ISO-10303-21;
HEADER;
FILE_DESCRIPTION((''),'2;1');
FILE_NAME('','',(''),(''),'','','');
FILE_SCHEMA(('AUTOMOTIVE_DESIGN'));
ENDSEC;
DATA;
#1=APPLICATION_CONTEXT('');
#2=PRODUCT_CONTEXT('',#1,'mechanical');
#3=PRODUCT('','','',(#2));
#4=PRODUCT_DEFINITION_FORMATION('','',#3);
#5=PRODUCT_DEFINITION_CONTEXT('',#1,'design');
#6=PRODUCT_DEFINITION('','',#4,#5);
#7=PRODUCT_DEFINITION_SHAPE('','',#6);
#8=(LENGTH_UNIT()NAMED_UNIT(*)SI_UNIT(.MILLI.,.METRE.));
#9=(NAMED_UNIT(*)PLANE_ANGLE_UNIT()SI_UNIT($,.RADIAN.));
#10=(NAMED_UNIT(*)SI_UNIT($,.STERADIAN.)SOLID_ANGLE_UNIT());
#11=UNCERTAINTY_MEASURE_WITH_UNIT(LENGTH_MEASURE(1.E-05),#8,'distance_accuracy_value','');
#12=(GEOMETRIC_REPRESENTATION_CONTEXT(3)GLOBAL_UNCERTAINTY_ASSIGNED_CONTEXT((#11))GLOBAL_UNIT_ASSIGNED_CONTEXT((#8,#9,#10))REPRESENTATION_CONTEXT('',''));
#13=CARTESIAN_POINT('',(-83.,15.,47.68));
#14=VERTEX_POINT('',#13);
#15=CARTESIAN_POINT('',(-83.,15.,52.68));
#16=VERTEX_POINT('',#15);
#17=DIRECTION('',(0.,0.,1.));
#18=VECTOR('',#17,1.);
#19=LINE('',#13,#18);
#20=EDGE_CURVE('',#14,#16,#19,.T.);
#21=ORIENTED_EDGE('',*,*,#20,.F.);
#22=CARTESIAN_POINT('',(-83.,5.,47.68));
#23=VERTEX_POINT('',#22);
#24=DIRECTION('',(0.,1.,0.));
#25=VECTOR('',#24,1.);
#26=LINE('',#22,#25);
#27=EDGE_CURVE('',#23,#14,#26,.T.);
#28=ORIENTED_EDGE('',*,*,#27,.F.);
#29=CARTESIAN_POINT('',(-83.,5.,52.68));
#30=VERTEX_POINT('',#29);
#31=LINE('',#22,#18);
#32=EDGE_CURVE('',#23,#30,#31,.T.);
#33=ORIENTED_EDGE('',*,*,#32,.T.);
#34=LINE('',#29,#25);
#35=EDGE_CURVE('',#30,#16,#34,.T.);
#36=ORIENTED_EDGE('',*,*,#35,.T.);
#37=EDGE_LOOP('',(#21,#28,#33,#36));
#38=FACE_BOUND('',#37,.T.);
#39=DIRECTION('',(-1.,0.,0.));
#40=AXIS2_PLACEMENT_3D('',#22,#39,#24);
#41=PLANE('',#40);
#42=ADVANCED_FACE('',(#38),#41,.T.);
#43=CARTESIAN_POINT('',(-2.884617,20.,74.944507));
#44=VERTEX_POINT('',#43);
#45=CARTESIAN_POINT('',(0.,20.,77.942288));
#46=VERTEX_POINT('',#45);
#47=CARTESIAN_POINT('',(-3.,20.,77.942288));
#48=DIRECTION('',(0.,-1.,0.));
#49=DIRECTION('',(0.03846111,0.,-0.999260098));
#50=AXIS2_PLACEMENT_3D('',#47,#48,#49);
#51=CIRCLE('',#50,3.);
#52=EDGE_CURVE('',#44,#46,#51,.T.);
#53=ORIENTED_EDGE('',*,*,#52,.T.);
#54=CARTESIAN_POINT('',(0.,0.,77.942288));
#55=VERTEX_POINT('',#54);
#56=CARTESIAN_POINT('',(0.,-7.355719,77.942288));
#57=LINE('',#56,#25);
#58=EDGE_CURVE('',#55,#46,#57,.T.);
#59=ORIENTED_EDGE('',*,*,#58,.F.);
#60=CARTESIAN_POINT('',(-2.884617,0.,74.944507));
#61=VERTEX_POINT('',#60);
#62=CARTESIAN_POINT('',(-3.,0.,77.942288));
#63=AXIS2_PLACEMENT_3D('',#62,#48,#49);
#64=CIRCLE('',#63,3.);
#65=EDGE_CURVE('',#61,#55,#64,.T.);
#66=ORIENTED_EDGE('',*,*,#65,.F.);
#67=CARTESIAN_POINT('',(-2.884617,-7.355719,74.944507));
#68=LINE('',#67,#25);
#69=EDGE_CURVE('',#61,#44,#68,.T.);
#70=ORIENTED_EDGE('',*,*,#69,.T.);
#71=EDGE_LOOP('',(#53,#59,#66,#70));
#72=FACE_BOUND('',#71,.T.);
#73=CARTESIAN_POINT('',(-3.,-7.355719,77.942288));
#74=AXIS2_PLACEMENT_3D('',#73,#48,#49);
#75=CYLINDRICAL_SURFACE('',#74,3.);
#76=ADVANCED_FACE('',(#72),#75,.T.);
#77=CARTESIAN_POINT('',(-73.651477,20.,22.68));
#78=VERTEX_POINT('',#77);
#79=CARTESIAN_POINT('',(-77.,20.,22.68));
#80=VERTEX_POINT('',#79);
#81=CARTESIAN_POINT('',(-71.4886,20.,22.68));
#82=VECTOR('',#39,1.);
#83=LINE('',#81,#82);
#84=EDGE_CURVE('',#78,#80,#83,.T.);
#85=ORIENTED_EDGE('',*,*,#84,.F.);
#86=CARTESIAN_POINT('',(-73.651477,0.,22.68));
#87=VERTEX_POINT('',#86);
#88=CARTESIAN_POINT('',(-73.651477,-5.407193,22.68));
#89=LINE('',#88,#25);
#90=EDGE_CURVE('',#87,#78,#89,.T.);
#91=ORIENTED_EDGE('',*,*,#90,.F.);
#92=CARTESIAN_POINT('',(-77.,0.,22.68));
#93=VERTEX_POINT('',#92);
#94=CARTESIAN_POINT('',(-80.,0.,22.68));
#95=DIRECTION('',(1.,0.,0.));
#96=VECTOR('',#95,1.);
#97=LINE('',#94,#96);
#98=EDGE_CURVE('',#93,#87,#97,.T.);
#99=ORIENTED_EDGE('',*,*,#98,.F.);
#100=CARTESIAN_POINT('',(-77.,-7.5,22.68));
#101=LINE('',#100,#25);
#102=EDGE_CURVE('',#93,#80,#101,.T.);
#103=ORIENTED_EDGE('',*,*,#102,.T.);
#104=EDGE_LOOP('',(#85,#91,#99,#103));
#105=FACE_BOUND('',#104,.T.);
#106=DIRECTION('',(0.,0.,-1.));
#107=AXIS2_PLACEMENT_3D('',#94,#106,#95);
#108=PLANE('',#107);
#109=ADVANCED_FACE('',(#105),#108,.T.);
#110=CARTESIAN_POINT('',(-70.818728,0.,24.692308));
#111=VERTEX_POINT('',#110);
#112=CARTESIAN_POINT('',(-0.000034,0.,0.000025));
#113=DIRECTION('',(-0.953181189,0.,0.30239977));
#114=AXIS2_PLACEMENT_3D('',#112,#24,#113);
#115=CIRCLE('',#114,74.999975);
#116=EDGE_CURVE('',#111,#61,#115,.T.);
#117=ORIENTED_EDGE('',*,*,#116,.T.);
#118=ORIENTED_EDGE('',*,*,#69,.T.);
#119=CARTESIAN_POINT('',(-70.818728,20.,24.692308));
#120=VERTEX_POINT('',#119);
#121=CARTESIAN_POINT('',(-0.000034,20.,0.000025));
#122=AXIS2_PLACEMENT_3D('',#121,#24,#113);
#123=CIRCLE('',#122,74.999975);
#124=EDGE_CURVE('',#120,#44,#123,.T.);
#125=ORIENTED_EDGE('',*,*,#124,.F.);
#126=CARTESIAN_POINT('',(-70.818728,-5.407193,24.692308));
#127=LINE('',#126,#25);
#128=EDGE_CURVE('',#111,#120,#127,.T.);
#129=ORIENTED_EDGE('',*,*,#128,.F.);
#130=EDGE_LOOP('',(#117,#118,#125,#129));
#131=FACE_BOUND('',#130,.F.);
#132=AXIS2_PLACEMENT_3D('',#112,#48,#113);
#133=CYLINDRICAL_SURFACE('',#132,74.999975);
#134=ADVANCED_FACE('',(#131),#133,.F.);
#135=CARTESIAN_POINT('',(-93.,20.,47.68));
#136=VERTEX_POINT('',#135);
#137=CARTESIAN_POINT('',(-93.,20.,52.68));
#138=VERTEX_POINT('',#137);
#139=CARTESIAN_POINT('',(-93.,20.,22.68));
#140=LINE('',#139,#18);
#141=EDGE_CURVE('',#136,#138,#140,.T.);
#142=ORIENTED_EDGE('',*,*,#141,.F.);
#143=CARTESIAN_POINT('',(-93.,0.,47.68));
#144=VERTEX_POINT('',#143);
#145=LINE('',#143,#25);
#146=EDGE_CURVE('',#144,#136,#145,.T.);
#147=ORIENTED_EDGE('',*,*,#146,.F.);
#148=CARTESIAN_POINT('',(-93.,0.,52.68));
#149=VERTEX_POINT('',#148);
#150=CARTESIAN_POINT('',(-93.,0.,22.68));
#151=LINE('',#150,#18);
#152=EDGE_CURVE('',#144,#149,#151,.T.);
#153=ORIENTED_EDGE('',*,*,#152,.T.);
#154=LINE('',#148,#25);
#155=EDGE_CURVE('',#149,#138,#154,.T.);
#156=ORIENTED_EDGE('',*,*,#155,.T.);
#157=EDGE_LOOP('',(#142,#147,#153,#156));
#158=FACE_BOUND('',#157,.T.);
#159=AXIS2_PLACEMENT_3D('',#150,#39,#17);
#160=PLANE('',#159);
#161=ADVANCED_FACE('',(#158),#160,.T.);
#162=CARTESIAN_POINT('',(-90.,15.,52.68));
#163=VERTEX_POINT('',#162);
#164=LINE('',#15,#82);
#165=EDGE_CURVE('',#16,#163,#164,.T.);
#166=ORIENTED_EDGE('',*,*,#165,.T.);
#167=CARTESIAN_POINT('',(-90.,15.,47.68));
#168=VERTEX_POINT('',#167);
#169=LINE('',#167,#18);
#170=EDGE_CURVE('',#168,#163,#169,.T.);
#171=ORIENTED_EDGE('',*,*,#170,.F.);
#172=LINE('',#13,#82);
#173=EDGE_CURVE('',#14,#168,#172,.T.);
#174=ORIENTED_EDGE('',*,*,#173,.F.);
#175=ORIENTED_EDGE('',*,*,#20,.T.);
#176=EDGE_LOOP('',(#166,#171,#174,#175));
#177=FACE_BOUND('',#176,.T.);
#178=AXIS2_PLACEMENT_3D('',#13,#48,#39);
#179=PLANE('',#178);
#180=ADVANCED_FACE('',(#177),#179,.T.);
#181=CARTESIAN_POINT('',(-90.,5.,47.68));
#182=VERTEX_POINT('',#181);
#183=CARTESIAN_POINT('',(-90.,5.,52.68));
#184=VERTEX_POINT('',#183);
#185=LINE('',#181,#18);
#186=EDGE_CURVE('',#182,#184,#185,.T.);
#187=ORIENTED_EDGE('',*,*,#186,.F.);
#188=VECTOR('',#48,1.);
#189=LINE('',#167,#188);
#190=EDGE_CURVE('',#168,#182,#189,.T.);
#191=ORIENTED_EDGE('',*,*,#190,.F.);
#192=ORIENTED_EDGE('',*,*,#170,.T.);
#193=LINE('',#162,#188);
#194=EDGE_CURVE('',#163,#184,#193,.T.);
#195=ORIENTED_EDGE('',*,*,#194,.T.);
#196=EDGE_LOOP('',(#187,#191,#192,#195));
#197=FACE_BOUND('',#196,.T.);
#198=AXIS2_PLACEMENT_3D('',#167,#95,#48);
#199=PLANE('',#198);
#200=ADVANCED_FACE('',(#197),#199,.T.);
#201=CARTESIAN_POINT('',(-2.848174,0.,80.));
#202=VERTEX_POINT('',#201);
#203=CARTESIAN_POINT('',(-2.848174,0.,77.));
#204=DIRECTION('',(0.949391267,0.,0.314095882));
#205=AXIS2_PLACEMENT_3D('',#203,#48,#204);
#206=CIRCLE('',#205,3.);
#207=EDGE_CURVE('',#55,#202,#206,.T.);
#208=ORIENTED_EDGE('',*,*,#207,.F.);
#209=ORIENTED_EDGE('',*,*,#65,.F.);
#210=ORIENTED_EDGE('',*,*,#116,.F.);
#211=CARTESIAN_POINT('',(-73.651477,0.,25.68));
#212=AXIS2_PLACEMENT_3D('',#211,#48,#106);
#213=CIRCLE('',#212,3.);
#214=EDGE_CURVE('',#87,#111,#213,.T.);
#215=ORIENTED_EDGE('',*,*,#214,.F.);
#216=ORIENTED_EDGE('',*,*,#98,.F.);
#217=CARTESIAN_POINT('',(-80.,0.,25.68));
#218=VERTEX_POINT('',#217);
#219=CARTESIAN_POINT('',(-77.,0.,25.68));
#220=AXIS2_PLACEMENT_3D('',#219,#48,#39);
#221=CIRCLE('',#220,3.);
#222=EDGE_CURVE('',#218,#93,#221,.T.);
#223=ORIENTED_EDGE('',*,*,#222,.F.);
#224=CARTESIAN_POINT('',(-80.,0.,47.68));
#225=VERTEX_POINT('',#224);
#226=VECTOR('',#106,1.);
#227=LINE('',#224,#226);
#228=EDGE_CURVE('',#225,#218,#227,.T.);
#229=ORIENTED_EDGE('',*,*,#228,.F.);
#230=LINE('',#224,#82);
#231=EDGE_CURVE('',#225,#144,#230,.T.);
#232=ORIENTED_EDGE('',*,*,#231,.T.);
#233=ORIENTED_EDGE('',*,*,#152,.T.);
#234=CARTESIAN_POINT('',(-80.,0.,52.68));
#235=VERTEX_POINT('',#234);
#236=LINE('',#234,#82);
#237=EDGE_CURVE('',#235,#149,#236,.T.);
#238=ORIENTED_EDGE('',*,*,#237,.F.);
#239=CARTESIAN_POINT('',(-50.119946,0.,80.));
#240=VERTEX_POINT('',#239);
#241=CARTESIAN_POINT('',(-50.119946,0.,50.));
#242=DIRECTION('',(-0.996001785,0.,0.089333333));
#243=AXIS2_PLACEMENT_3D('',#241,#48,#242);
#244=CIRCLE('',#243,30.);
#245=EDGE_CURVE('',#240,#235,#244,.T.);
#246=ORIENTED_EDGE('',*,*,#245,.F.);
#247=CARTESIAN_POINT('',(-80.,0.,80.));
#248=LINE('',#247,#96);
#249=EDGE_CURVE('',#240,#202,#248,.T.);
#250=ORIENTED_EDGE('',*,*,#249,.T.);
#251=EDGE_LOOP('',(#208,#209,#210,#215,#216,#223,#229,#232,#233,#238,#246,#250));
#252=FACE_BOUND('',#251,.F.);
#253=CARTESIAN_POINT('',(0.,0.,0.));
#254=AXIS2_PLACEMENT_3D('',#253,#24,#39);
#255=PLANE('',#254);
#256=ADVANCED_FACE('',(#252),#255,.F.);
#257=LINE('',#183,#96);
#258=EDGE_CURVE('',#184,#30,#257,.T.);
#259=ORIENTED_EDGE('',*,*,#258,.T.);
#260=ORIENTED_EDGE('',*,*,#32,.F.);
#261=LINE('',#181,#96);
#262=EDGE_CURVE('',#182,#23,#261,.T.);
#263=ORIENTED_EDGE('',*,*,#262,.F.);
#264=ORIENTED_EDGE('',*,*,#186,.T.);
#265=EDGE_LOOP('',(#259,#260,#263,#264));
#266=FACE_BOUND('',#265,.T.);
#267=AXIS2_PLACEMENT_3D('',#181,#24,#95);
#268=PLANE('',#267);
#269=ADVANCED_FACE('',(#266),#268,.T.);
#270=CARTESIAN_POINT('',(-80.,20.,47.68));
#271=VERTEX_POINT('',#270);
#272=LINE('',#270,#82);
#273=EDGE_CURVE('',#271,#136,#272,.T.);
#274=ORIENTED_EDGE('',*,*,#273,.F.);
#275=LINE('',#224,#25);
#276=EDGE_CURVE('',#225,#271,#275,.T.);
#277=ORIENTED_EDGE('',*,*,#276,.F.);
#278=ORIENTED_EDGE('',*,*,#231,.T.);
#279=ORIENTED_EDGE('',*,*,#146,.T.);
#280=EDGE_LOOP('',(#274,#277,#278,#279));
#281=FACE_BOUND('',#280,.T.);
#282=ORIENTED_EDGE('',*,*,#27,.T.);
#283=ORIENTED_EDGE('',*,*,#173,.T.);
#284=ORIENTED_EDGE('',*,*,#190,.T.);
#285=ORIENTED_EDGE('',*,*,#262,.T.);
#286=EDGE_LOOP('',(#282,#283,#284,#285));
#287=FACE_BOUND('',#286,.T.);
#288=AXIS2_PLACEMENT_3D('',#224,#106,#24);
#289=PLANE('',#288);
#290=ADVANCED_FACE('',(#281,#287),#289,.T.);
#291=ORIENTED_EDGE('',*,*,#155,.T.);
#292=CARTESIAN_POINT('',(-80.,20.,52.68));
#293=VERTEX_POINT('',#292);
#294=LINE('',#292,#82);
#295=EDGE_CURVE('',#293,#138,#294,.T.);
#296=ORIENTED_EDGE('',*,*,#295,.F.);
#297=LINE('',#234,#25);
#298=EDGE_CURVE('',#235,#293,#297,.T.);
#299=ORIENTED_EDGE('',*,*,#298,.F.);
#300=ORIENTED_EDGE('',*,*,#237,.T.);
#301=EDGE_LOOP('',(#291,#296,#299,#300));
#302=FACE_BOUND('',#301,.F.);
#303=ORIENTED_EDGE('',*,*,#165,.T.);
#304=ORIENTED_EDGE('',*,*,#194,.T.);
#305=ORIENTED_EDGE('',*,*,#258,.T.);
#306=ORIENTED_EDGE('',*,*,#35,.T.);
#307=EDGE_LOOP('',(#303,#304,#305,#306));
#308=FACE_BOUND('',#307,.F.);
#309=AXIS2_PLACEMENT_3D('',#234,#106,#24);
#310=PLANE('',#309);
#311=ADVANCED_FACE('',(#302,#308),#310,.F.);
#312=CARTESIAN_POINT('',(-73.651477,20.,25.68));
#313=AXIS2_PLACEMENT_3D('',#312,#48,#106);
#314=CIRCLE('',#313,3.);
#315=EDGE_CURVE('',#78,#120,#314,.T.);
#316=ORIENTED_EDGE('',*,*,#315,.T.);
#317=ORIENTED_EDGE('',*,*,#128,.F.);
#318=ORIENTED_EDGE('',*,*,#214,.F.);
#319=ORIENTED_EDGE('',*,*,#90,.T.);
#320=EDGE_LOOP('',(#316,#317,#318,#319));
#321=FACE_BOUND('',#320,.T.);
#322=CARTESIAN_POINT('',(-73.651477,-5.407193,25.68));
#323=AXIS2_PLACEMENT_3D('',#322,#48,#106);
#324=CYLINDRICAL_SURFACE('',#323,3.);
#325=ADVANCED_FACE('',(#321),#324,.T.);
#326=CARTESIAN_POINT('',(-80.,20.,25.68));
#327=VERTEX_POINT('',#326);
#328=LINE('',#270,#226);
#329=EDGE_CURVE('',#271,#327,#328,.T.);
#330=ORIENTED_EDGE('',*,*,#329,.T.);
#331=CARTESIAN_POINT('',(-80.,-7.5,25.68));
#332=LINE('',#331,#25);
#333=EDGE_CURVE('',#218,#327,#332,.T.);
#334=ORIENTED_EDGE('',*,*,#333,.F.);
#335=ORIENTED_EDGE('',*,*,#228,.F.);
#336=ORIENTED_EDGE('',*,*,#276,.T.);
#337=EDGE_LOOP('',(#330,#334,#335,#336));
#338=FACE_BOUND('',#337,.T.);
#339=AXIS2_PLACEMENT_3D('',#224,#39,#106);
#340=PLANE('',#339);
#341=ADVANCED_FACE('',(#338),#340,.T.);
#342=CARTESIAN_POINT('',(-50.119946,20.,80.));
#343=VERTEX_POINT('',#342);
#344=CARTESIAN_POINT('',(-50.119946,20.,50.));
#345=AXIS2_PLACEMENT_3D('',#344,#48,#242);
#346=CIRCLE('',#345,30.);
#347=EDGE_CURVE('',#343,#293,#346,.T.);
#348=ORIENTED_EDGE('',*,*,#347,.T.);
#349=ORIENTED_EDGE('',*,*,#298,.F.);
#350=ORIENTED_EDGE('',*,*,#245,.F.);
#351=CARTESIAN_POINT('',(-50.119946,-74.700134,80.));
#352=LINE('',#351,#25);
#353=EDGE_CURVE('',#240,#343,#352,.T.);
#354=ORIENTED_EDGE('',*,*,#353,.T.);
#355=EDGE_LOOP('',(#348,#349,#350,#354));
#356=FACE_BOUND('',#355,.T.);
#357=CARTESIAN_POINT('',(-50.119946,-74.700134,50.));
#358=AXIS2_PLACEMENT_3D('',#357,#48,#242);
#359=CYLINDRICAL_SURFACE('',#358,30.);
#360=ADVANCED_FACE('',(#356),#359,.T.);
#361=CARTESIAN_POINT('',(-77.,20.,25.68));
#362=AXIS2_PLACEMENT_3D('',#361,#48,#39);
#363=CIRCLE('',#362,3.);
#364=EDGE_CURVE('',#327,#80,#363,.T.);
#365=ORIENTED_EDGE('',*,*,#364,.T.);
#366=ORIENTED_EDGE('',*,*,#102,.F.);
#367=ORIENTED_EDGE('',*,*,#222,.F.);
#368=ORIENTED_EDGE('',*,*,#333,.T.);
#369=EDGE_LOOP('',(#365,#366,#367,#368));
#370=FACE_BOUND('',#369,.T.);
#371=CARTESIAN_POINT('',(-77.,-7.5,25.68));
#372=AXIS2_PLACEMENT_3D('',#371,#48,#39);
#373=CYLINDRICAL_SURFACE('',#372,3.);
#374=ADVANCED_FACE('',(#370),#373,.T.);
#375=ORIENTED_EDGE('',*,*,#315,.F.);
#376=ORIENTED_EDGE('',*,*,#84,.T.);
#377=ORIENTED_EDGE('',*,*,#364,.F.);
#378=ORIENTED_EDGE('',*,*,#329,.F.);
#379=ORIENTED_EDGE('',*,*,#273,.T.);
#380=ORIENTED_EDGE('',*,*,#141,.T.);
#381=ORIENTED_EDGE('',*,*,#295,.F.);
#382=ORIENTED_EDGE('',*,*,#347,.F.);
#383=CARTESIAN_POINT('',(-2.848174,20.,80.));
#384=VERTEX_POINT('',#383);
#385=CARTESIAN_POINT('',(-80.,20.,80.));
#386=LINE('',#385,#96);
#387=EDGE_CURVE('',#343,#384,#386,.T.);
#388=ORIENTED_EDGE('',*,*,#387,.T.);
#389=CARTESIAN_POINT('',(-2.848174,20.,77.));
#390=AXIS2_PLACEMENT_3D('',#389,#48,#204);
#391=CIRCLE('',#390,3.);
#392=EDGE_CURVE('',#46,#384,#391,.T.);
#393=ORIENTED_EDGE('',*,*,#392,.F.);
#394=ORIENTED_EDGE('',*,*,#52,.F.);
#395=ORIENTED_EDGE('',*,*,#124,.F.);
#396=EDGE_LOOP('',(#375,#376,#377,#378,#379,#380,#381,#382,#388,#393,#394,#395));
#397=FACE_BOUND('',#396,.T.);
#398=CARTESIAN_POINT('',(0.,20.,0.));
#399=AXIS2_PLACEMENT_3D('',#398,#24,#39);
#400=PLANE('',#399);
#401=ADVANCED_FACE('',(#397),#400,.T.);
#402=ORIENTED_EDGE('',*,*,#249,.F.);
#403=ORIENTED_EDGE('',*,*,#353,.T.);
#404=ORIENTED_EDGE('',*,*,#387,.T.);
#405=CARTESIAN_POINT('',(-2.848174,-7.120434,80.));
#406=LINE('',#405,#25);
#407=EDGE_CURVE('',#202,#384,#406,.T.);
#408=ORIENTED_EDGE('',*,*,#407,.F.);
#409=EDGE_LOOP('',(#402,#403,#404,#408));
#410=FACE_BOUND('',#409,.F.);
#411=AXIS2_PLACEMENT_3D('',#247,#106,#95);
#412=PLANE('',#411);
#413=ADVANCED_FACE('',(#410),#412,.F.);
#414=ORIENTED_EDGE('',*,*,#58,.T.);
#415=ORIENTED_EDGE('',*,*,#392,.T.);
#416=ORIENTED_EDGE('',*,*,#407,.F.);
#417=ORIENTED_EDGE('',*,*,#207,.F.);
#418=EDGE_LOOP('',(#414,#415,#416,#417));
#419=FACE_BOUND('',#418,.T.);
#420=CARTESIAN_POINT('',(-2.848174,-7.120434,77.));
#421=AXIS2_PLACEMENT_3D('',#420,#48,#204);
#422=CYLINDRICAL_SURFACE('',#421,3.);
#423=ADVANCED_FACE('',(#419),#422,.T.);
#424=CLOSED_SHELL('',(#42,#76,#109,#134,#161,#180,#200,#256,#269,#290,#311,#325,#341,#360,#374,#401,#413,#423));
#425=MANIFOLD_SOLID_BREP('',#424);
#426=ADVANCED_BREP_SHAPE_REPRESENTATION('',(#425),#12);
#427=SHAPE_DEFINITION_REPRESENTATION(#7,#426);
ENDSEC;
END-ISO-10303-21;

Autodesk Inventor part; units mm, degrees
ref_plane "YZ Plane" through (0, 0, 0) normal (1, 0, 0) x (0, 1, 0)
ref_plane "XZ Plane" through (0, 0, 0) normal (0, 1, 0) x (-1, 0, 0)
ref_plane "XY Plane" through (0, 0, 0) normal (0, 0, 1) x (1, 0, 0)
sketch "Boceto1" plane through (0, 0, 0) normal (0, 1, 0) x (-1, 0, 0)
  line L0 (80, 80) -> (0, 80)
  line L1 (0, 80) -> (0, 75)
  line L2 (80, 47.68) -> (80, 52.68)
  line L3 (80, 47.68) -> (80, 22.68)
  line L4 (80, 22.68) -> (75, 22.68)
  line L5 (75, 22.68) -> (71.4886, 22.68)
  line L6 (80, 80) -> (80, 52.68)
  arc A0 (71.4886, 22.68) -> (0, 75) centre (0, 0) ccw
  dimension "d4" = 5
  dimension "d5" = 25
extrude "Extrusión1" add sketch "Boceto1" along normal blind 20
sketch "Boceto2" plane through (-80, 0, 22.68) normal (-1, 0, 0) x (0, 0, 1)
  line L0 (0, 0) -> (52.32, 0) projected
  line L1 (25, 0) -> (30, 0)
  line L2 (30, 0) -> (30, 20)
  line L3 (0, 20) -> (52.32, 20) projected
  line L4 (25, 0) -> (25, 20)
  line L5 (25, 20) -> (30, 20)
  point P0 (-22.68, 0)
  dimension "d8" = 47.68
  dimension "d9" = 5
extrude "Extrusión2" add sketch "Boceto2" along normal blind 13
sketch "Boceto3" plane through (-80, 0, 47.68) normal (0, 0, -1) x (-1, 0, 0)
  line L0 (0, 0) -> (13, 0) projected
  line L1 (0, 0) -> (3, 0)
  line L2 (0, 20) -> (13, 20) projected
  line L3 (3, 15) -> (10, 15)
  line L4 (10, 15) -> (10, 5)
  line L5 (10, 5) -> (3, 5)
  line L6 (3, 5) -> (3, 15)
  point P0 (-80, 0)
  dimension "d12" = 3
  dimension "d14" = 7
  dimension "d15" = 10
extrude "Extrusión3" cut sketch "Boceto3" against normal blind 5
fillet "Empalme1" radius 30 1 edges at (-80, 10, 80)
fillet "Empalme2" radius 3 4 edges at (-80, 10, 22.68) (-71.4886, 10, 22.68) (0, 10, 75) (0, 10, 80)
properties part number "Positioner_Adapter"
